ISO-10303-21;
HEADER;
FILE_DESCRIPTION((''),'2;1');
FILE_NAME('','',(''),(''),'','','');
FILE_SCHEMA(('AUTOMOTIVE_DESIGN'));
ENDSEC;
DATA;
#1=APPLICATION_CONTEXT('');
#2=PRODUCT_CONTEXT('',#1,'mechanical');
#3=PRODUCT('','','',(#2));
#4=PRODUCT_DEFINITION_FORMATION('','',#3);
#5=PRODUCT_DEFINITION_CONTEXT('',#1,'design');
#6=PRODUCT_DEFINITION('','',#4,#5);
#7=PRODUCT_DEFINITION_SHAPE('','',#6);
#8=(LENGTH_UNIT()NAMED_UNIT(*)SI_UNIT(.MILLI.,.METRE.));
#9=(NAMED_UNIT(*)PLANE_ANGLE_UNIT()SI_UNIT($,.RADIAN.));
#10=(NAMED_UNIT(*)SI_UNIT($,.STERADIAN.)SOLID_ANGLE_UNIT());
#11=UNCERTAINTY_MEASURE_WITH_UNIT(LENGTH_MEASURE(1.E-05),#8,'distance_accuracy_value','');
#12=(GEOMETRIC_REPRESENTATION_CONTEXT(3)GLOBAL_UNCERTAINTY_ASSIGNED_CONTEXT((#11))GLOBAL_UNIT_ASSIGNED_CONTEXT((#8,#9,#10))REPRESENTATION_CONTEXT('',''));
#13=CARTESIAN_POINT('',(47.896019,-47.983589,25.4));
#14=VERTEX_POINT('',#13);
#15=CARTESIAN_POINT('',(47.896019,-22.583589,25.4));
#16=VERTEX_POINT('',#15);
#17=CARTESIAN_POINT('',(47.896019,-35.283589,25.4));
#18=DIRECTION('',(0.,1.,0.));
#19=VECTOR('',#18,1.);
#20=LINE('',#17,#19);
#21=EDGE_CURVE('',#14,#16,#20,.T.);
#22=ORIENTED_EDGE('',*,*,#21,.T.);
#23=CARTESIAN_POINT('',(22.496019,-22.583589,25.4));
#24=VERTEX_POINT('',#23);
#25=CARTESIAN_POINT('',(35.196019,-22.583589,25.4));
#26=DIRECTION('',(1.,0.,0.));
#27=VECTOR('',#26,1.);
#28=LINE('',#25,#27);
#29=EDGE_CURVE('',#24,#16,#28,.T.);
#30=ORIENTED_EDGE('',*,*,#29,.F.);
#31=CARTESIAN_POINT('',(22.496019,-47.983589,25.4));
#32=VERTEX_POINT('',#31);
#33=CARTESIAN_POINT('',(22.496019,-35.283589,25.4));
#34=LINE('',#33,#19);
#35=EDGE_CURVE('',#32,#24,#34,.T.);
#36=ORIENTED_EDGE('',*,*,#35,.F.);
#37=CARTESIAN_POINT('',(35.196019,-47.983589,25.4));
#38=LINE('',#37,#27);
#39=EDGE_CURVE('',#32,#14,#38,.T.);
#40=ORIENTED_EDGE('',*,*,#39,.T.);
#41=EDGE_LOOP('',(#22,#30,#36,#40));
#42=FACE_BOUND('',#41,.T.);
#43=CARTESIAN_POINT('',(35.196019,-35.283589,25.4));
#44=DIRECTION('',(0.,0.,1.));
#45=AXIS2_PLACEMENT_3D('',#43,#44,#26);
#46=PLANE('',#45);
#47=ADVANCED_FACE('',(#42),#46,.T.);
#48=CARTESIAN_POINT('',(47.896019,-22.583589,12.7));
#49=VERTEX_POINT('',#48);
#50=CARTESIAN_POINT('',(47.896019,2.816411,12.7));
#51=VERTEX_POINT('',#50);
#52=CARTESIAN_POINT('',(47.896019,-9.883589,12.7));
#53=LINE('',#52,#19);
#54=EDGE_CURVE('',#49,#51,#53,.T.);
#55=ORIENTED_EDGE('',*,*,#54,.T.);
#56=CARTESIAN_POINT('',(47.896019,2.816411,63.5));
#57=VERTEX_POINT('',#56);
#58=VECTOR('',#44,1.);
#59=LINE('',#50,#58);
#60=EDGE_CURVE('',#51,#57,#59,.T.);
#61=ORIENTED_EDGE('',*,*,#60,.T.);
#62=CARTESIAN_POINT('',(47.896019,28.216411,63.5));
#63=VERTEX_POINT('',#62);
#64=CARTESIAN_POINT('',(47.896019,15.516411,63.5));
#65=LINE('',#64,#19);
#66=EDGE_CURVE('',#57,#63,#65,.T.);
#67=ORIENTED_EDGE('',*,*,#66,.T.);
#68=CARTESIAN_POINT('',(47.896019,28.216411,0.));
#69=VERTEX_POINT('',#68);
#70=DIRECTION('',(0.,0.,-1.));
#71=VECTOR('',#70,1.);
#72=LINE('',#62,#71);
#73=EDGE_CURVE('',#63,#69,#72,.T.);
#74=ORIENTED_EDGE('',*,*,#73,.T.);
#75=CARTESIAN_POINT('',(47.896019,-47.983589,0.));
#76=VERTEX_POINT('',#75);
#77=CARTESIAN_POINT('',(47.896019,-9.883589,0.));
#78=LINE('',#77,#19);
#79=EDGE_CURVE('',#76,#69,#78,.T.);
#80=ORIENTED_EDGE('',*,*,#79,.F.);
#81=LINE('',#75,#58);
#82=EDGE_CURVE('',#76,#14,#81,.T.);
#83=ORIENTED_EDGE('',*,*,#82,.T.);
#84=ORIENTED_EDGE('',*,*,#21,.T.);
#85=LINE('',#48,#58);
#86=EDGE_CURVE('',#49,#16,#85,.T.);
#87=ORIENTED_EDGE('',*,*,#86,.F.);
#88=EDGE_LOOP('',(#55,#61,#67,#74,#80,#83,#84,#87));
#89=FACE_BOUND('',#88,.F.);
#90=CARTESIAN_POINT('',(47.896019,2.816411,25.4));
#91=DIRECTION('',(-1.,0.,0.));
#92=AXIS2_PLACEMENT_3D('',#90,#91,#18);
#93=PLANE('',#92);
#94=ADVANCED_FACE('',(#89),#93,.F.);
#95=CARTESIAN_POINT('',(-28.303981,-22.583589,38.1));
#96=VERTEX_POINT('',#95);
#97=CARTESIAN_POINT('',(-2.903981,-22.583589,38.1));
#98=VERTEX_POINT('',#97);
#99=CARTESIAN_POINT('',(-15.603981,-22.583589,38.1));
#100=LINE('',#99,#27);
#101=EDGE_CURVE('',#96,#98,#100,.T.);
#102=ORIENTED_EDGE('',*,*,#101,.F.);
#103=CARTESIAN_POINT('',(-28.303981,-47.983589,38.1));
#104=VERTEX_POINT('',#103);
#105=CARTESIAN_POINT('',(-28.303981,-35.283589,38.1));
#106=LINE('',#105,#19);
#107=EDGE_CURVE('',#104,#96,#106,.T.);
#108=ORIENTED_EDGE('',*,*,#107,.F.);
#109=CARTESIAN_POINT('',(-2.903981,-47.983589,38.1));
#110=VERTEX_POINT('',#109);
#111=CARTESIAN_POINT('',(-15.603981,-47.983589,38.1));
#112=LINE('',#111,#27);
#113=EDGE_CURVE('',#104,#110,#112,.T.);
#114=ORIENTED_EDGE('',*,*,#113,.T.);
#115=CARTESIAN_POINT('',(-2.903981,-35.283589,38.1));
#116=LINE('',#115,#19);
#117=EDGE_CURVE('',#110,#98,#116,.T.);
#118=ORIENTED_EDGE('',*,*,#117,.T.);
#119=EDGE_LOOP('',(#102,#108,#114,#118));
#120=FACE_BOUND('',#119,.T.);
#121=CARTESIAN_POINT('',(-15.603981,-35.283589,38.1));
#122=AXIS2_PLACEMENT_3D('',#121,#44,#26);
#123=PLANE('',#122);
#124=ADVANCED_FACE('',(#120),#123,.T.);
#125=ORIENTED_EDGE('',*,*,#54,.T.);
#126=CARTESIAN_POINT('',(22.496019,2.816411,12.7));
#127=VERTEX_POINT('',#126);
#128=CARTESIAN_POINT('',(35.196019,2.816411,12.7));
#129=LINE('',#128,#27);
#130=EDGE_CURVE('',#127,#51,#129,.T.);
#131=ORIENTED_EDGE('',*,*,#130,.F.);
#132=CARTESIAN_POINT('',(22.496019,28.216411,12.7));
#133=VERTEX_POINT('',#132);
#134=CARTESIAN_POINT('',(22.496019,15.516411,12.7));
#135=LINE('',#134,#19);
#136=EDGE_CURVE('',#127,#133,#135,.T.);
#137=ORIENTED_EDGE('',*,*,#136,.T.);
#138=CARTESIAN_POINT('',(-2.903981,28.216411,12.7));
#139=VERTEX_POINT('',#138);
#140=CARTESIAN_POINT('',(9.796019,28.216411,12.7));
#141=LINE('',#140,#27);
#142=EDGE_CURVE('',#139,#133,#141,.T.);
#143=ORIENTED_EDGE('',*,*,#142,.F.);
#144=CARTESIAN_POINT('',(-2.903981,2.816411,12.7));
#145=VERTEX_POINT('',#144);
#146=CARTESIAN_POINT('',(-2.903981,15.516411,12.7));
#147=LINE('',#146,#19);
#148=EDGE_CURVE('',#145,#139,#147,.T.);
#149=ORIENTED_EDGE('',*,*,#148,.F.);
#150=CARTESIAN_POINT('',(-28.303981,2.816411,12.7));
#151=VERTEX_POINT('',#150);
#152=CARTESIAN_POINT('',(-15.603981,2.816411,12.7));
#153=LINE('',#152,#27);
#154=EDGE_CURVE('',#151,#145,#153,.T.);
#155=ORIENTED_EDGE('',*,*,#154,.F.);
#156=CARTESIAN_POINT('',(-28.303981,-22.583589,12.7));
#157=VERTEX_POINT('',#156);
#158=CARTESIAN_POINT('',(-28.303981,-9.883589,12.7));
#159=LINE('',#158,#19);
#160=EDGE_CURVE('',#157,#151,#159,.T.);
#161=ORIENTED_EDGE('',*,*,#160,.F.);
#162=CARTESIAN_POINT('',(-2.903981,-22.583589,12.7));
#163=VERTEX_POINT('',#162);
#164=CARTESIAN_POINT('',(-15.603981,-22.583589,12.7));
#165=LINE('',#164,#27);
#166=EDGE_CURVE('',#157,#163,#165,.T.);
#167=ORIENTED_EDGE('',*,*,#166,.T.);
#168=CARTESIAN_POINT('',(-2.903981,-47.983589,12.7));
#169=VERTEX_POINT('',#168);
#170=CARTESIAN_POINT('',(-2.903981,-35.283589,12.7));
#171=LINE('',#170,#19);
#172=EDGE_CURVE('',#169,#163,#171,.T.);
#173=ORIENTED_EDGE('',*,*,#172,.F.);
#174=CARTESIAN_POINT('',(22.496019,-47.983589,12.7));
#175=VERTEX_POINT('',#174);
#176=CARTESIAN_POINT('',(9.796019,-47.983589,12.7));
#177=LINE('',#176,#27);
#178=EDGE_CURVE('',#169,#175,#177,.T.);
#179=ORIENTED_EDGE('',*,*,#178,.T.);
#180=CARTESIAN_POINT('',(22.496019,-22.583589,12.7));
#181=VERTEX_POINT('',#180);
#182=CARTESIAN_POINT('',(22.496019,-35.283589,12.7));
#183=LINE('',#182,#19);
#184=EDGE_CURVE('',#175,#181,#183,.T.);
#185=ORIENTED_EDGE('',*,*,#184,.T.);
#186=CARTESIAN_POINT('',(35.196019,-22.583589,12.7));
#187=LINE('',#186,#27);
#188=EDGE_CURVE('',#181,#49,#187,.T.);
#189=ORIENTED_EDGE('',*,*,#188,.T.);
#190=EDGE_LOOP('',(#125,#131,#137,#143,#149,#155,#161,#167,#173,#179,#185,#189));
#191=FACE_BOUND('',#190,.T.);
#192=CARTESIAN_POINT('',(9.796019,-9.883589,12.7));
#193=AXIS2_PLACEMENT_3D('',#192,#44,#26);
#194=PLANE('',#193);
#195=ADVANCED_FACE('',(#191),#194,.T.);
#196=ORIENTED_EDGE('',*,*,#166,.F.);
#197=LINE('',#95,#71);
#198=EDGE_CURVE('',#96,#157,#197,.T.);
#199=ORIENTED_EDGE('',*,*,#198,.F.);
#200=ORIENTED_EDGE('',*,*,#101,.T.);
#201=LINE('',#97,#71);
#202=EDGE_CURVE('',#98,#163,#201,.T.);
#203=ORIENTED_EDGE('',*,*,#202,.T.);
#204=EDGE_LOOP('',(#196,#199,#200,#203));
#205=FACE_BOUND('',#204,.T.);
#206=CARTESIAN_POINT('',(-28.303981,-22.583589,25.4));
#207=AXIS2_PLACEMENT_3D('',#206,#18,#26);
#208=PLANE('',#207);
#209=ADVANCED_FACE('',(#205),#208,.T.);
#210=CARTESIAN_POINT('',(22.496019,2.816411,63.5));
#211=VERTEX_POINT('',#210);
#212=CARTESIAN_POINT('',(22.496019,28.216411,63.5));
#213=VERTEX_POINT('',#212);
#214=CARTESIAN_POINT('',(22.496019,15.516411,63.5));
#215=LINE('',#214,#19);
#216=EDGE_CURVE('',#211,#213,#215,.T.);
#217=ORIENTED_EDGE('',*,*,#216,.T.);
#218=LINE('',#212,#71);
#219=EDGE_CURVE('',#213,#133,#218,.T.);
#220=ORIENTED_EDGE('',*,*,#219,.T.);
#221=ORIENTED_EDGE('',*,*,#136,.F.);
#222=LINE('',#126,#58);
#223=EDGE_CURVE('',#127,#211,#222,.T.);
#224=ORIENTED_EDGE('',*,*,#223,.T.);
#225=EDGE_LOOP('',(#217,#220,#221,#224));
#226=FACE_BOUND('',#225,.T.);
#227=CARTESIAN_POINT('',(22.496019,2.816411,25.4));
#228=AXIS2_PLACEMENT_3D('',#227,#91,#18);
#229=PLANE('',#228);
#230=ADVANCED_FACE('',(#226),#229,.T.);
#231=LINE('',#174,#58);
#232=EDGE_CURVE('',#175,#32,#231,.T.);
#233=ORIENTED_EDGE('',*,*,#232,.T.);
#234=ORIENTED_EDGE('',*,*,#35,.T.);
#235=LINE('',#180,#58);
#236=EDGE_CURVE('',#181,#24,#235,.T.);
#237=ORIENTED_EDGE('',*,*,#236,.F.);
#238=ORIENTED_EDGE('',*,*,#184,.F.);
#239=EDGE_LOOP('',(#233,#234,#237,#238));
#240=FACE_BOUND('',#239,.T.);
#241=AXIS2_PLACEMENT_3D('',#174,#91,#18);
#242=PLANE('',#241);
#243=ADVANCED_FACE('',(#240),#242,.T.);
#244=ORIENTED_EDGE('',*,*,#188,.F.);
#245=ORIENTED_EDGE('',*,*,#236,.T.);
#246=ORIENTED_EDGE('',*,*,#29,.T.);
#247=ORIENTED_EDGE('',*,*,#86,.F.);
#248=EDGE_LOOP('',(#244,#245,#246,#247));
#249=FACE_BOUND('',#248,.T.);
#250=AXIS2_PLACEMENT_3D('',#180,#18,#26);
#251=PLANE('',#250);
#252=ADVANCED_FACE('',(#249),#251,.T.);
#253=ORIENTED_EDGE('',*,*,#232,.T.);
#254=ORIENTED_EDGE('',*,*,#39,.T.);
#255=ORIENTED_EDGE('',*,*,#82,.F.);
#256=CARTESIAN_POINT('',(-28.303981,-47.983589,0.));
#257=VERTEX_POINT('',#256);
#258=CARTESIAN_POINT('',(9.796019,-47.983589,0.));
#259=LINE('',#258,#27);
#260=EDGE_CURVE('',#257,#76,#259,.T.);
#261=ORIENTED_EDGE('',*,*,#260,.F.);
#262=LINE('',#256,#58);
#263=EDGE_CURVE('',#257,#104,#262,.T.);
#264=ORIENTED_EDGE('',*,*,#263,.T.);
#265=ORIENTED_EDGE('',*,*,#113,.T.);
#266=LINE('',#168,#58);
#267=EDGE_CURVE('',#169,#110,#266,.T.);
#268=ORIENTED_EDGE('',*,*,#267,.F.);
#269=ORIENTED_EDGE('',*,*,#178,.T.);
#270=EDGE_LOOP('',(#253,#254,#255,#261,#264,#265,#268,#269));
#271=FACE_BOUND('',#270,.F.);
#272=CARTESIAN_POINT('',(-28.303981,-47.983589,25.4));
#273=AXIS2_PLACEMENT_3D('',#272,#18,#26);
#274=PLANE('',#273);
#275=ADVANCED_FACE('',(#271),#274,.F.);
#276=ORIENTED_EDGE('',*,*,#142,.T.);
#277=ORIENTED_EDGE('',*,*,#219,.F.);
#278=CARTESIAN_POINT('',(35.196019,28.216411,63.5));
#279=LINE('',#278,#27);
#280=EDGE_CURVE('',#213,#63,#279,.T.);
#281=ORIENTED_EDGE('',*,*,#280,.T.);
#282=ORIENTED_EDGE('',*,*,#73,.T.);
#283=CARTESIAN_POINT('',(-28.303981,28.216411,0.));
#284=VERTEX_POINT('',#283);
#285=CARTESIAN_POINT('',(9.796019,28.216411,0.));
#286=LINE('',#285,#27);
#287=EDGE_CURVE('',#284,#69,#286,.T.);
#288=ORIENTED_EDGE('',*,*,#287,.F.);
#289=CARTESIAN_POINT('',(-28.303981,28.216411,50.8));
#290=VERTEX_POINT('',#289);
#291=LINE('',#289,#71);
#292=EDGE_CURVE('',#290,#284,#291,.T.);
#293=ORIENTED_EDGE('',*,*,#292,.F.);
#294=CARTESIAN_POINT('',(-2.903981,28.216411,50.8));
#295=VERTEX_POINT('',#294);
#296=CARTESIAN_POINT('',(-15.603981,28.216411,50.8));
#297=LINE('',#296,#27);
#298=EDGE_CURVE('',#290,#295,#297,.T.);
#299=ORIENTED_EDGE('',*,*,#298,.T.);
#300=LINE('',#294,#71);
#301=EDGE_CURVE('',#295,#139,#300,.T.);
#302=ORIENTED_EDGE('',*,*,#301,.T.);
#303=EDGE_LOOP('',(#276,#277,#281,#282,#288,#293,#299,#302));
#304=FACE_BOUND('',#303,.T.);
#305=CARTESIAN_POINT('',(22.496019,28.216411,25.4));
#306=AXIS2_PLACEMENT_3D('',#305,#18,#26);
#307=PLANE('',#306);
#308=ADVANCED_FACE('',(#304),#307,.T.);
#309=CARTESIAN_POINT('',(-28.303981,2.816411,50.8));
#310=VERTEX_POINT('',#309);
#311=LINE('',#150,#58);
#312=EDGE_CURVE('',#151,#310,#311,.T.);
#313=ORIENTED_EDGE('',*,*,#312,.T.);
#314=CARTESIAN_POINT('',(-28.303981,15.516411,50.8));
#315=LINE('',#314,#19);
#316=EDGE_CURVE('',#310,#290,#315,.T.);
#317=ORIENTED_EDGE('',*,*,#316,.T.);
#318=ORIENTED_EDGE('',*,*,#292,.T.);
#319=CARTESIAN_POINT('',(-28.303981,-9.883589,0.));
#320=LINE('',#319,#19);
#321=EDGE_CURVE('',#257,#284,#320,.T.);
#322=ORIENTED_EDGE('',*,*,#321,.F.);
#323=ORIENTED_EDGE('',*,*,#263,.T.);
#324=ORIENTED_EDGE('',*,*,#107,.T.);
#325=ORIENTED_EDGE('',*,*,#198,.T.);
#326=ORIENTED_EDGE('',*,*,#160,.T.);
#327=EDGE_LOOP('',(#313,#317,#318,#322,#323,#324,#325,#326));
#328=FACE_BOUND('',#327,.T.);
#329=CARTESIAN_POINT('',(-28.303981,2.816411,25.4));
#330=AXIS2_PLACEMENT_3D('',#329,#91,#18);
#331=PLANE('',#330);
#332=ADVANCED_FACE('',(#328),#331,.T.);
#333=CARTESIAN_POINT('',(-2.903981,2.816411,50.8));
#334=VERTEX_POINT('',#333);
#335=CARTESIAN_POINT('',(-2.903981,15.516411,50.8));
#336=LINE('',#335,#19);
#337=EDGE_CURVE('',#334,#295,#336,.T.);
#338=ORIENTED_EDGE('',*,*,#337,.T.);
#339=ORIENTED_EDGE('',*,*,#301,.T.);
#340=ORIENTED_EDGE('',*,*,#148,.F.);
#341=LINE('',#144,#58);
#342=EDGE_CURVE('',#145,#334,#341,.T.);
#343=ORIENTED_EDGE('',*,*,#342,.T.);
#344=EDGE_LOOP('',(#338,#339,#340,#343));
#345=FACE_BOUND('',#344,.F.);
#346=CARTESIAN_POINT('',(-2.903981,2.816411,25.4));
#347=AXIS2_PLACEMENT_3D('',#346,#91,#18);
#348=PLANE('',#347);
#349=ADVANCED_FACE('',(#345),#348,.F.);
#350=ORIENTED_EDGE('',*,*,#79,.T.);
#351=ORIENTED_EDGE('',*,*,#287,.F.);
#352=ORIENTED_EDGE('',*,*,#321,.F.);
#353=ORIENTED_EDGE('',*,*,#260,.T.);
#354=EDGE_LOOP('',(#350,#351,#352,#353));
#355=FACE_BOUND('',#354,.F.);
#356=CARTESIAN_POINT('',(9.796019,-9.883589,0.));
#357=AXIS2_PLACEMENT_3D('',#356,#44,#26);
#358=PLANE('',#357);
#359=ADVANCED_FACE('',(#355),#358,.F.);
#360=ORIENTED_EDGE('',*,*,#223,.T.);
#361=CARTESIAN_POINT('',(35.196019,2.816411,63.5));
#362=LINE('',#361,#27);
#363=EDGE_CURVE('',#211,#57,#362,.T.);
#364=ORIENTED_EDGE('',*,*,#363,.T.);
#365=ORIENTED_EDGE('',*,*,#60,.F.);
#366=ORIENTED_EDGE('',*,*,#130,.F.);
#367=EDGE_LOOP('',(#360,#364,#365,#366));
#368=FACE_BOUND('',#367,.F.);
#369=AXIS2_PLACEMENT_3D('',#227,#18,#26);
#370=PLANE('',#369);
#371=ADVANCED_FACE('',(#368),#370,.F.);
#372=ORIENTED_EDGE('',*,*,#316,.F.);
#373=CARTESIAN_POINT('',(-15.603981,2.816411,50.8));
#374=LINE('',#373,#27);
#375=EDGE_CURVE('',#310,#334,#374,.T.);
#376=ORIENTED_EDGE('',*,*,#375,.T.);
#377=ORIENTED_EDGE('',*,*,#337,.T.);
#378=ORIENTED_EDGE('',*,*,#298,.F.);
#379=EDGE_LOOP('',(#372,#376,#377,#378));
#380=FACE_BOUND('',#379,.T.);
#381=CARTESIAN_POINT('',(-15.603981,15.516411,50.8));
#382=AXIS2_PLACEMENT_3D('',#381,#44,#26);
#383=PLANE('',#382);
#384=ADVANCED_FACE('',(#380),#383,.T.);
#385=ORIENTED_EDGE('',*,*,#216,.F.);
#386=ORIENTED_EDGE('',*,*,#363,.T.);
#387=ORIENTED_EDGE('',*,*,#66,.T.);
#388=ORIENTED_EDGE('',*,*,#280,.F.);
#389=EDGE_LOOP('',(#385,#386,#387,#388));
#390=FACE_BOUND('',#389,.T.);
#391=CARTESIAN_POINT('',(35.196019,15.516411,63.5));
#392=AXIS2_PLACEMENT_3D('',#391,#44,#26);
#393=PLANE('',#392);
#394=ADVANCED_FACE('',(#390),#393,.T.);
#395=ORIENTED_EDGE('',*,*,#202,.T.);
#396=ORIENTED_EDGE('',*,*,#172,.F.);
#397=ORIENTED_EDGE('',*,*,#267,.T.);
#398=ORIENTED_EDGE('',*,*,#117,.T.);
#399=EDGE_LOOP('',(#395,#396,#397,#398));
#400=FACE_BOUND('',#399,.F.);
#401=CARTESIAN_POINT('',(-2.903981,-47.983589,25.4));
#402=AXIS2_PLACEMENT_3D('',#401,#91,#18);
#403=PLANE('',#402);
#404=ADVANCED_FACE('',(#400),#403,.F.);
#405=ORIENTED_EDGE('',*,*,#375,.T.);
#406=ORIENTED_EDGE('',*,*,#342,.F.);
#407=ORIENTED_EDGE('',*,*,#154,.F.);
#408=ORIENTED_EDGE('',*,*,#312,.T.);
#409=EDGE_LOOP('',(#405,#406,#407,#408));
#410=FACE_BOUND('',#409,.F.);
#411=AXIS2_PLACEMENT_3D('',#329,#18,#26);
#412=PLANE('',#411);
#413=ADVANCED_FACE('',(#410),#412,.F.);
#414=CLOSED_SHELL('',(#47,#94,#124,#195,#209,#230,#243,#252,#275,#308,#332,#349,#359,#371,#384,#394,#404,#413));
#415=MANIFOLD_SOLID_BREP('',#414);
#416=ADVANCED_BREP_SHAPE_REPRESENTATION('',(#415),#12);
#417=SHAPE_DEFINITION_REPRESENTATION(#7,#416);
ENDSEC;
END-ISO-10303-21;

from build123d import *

# Parameters (mm, degrees)
F0_W     = 76.2
F0_H     = 76.2
F1_DEPTH = 12.7
F2_W     = 25.4
F2_H     = 25.4
F3_DEPTH = 12.7
F4_DEPTH = 12.7
F5_DEPTH = 25.4
F6_DEPTH = 38.1


with BuildPart() as f1:
    # F0 (on Top) → F1 (new body)
    with BuildSketch(Plane.XY):
        with Locations((9.7960191858, -9.8835891113)):
            Rectangle(F0_W, F0_H)
    extrude(amount=F1_DEPTH)

    # F2 (on face) → F3 (join)
    with BuildSketch(Plane.XY.offset(12.7)):
        with Locations((35.1960191858, -35.2835891113)):
            Rectangle(F2_W, F2_H)
        with Locations((-15.6039808142, -35.2835891113)):
            Rectangle(F2_W, F2_H)
        with Locations((-15.6039808142, 15.5164108887)):
            Rectangle(F2_W, F2_H)
        with Locations((35.1960191858, 15.5164108887)):
            Rectangle(F2_W, F2_H)
    extrude(amount=F3_DEPTH)

    # F4 (add): a face of the model
    f4_faces = [f1.faces().sort_by_distance(p)[0] for p in [
        (-15.6039808142, -35.2835891113, 25.4),
    ]]
    extrude(f4_faces, amount=F4_DEPTH)

    # F5 (add): a face of the model
    f5_faces = [f1.faces().sort_by_distance(p)[0] for p in [
        (-15.6039808142, 15.5164108887, 25.4),
    ]]
    extrude(f5_faces, amount=F5_DEPTH)

    # F6 (add): a face of the model
    f6_faces = [f1.faces().sort_by_distance(p)[0] for p in [
        (35.1960191858, 15.5164108887, 25.4),
    ]]
    extrude(f6_faces, amount=F6_DEPTH)


solid = f1.part
